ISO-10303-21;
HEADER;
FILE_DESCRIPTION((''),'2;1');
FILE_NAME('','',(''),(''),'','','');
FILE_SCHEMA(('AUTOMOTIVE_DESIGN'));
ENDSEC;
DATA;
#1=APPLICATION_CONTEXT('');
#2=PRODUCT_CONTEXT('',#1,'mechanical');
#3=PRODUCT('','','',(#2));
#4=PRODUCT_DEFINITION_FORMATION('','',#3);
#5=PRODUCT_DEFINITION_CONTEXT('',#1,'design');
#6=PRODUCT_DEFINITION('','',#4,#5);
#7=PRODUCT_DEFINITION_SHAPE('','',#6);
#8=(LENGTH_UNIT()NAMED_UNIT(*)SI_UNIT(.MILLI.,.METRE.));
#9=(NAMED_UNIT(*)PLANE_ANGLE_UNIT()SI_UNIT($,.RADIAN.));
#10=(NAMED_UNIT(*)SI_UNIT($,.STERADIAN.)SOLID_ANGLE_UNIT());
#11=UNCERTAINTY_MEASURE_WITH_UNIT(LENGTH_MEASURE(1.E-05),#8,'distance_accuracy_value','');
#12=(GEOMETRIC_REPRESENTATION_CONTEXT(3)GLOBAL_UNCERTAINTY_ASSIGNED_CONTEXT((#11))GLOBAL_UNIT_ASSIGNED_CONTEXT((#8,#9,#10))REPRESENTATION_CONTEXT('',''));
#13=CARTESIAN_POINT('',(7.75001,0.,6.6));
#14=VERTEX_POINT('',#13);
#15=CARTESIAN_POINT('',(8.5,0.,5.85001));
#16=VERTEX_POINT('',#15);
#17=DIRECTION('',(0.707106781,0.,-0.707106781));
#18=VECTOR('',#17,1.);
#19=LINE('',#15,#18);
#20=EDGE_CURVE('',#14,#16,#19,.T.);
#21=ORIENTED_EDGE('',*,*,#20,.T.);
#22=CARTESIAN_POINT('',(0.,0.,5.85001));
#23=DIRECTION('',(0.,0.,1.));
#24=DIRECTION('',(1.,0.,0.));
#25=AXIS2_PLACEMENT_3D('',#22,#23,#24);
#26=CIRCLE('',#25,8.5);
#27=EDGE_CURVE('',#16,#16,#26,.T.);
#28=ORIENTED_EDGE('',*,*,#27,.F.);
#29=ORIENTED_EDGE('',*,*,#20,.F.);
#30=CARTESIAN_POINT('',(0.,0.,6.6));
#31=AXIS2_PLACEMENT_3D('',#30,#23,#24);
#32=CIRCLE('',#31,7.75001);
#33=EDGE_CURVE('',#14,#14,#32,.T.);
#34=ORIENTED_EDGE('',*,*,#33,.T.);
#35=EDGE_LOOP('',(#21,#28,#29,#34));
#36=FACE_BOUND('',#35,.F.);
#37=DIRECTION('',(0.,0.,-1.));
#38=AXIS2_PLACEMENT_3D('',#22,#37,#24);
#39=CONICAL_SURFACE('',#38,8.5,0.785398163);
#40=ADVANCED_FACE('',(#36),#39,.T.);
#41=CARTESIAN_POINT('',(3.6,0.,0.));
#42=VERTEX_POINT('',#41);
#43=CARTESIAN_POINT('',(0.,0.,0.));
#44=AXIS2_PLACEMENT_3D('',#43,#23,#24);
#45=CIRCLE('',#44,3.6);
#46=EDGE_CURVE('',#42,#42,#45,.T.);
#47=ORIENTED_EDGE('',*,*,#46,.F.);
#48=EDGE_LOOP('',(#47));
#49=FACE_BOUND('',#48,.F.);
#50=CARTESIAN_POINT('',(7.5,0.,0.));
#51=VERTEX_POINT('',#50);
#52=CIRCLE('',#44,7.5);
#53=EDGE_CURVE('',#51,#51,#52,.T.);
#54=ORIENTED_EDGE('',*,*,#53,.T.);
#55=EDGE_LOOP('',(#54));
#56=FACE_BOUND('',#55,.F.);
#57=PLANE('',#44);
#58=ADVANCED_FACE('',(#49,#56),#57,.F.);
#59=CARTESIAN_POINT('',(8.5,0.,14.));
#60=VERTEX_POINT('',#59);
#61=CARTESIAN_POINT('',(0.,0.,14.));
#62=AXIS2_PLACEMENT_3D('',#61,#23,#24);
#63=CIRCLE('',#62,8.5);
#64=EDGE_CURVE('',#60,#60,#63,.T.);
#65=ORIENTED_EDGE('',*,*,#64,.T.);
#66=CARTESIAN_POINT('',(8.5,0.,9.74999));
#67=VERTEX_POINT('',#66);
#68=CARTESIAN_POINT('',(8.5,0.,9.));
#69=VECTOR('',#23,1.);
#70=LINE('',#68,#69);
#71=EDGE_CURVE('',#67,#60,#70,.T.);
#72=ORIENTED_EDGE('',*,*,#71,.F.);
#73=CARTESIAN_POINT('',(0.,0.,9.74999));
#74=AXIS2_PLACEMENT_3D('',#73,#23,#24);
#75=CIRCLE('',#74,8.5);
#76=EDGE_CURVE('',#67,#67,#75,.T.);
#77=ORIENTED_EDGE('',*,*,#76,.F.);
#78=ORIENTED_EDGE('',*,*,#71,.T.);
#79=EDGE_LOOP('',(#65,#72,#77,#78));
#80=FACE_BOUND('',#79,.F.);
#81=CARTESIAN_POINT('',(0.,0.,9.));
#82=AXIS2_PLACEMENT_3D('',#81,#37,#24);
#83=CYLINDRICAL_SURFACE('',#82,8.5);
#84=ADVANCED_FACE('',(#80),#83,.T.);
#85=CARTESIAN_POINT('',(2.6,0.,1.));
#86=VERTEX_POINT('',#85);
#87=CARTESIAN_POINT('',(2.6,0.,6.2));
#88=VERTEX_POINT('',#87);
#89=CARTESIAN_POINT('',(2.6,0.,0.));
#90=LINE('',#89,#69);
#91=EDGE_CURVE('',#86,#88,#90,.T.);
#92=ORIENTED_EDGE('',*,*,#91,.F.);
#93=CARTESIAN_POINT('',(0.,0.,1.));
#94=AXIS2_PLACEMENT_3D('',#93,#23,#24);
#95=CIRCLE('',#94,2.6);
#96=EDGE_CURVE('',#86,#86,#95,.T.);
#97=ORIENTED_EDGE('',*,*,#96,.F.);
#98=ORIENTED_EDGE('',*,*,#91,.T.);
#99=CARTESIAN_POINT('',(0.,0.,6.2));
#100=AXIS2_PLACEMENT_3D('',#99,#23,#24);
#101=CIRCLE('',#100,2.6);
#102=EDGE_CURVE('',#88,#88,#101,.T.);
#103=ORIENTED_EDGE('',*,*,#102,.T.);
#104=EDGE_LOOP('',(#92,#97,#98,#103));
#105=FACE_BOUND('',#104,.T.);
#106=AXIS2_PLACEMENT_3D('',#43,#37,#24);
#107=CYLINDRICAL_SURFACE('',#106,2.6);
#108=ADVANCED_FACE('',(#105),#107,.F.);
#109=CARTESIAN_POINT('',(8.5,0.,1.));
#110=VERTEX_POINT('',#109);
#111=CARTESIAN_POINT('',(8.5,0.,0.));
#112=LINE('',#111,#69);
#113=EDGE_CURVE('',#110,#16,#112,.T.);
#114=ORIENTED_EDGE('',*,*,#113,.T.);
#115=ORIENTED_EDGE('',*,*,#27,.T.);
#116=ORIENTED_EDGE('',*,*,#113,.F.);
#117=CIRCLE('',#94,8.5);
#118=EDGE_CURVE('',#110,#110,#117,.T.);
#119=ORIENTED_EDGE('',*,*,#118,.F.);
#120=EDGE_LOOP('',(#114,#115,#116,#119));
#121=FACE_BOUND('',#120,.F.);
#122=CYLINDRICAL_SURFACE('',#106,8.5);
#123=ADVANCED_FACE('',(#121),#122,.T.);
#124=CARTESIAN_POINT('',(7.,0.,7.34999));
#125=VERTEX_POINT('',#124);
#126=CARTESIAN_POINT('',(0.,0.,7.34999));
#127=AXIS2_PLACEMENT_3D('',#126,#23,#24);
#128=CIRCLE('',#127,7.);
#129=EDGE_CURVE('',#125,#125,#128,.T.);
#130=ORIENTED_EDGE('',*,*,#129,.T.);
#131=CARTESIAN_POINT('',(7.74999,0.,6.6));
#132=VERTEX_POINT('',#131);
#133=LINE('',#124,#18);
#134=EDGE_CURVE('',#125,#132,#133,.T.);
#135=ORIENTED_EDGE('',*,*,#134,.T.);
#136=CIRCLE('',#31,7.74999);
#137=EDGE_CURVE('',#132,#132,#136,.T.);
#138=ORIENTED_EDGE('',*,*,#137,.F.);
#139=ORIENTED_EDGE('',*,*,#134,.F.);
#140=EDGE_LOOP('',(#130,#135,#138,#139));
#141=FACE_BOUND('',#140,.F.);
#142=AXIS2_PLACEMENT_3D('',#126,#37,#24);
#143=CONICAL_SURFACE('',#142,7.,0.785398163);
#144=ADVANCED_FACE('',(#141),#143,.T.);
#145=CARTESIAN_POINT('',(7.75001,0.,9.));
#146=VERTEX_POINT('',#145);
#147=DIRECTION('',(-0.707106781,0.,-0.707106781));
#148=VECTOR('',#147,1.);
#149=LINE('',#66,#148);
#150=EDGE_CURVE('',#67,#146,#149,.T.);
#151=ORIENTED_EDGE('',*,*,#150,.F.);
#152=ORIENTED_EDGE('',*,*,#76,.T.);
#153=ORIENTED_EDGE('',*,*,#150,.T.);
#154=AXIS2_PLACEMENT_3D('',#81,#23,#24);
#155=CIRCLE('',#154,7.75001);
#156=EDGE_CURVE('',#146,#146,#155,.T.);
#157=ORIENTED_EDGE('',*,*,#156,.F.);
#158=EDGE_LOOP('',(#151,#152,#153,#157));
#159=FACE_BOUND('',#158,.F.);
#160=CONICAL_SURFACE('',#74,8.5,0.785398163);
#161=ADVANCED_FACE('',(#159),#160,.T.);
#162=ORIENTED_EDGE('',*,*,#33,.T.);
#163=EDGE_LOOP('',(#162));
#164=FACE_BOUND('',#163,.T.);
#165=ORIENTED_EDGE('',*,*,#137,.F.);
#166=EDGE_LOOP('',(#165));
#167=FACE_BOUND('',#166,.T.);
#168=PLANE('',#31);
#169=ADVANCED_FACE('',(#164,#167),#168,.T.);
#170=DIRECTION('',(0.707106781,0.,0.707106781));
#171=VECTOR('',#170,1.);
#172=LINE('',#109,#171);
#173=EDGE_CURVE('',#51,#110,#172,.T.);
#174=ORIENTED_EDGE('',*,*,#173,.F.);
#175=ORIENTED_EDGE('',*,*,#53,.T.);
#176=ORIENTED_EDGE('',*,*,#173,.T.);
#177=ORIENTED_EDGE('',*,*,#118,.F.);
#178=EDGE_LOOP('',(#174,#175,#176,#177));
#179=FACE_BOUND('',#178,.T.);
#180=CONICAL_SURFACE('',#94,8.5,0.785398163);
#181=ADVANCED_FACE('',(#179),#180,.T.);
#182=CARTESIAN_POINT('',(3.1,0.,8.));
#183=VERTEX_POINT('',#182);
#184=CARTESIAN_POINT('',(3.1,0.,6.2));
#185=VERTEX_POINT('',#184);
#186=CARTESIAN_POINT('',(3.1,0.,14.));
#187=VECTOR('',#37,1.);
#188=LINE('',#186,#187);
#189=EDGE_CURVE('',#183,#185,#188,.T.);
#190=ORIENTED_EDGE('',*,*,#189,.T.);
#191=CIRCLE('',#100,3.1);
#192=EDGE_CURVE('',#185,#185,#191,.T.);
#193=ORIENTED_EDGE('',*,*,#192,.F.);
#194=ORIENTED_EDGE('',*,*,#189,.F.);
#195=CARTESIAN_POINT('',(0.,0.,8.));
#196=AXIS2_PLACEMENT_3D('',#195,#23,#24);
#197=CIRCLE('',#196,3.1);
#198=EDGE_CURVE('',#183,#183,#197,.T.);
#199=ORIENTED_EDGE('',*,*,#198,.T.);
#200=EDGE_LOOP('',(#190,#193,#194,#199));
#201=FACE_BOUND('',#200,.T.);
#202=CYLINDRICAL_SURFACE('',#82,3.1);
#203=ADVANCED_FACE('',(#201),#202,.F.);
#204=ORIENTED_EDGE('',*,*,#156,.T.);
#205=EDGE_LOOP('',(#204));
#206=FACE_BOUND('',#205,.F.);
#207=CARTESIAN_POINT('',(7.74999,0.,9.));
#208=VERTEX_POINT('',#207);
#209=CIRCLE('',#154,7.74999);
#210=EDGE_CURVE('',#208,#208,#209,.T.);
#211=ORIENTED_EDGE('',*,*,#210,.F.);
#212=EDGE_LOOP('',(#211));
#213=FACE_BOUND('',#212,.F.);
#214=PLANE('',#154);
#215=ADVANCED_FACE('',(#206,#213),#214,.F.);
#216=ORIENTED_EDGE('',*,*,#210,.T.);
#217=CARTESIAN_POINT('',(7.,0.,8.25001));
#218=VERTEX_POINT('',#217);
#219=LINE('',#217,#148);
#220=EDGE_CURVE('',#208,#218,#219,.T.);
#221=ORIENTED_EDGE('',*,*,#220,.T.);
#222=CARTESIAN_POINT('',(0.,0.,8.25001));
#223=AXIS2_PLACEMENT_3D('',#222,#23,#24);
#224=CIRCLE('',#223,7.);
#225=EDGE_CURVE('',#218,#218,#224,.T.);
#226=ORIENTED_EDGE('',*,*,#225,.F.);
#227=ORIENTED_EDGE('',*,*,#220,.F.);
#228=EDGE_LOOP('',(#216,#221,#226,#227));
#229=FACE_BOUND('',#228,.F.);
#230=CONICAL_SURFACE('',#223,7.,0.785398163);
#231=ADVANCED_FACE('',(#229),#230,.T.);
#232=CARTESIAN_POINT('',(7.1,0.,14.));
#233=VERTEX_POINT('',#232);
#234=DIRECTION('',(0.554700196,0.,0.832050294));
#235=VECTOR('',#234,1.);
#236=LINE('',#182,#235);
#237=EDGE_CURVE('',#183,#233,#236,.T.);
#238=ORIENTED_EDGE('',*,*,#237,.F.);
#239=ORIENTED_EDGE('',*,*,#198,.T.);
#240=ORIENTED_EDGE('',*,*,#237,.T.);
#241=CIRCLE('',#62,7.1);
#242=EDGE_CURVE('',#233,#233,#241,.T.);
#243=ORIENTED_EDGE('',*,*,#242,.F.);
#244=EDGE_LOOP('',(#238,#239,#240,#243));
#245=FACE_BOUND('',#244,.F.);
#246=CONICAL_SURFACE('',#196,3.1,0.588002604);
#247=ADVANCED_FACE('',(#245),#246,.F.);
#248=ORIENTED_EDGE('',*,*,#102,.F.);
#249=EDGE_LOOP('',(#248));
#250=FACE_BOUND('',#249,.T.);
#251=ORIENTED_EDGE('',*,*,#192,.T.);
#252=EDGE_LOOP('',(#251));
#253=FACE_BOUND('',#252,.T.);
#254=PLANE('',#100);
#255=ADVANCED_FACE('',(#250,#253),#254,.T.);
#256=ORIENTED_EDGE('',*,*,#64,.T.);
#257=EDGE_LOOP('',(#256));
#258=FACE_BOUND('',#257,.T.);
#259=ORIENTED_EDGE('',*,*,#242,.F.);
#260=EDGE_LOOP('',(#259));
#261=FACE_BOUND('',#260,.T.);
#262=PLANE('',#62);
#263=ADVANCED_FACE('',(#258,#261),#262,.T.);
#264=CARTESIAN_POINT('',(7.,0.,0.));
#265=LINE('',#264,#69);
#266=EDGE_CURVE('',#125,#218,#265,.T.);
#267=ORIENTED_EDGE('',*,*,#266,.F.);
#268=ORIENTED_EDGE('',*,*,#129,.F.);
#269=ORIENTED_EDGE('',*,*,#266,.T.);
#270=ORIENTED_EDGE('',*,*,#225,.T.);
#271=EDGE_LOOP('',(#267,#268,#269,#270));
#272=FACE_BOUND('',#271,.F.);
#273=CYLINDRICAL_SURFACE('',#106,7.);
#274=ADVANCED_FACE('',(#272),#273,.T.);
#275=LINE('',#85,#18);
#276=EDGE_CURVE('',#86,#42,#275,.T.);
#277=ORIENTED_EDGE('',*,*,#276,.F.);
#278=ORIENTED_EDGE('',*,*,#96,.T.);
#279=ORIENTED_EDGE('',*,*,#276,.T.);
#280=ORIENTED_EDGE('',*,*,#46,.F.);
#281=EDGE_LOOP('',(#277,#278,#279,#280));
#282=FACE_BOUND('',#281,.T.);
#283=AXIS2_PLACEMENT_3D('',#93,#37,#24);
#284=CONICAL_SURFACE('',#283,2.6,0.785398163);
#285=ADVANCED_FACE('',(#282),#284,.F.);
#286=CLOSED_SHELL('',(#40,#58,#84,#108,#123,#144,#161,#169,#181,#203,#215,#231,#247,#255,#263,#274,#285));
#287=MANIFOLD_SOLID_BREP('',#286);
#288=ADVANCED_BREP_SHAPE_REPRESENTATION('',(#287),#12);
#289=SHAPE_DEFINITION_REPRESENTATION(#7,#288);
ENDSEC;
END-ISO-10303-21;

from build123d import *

# Parameters (mm, degrees)
F0_R     = 8.5
F0_R_2   = 7
F1_DEPTH = 6.6
F0_R_3   = 3.1
F2_DEPTH = 9
F3_R     = 8.5
F3_R_2   = 7
F3_R_3   = 3.1
F4_DEPTH = 5
F0_R_4   = 2.6
F5_DEPTH = 6.2
F6_SIZE  = 1
F7_SIZE2 = 4
F7_SIZE  = 6
F8_SIZE  = 0.74999


# Not quite as in the source:
# - a fillet or chamfer is up to 0.001 mm smaller than in the source, because OpenCascade refuses the exact size


with BuildPart() as f1:
    # F0 (on Top) → F1 (new body)
    with BuildSketch(Plane.XY):
        Circle(F0_R)
        Circle(F0_R_2, mode=Mode.SUBTRACT)
    extrude(amount=F1_DEPTH)

    # F0 (on Top) → F2 (join)
    with BuildSketch(Plane.XY):
        Circle(F0_R_2)
        Circle(F0_R_3, mode=Mode.SUBTRACT)
    extrude(amount=F2_DEPTH)

    # F3 (on face) → F4 (join)
    with BuildSketch(Plane.XY.offset(9)):
        Circle(F3_R)
        Circle(F3_R_2, mode=Mode.SUBTRACT)
        Circle(F3_R_2)
        Circle(F3_R_3, mode=Mode.SUBTRACT)
    extrude(amount=F4_DEPTH)

    # F0 (on Top) → F5 (join)
    with BuildSketch(Plane.XY):
        Circle(F0_R_3)
        Circle(F0_R_4, mode=Mode.SUBTRACT)
    extrude(amount=F5_DEPTH)

    # F6
    f6_edges = [f1.edges().sort_by_distance(p)[0] for p in [
        (-2.6, 0, 0),
        (-8.5, 0, 0),
    ]]
    chamfer(f6_edges, length=F6_SIZE)

    # F7
    f7_edges = [f1.edges().sort_by_distance(p)[0] for p in [
        (-3.1, 0, 14),
    ]]
    f7_side = f1.faces().sort_by_distance((-3.1, 0, 10.1))[0]
    chamfer(f7_edges, length=F7_SIZE, length2=F7_SIZE2, reference=f7_side)

    # F8 (size 0.75 in the source; OpenCascade refuses exactly that, so slightly less here)
    f8_edges = [f1.edges().sort_by_distance(p)[0] for p in [
        (-7, 0, 9),
        (-7, 0, 6.6),
        (-8.5, 0, 6.6),
        (-8.5, 0, 9),
    ]]
    chamfer(f8_edges, length=F8_SIZE)


solid = f1.part
